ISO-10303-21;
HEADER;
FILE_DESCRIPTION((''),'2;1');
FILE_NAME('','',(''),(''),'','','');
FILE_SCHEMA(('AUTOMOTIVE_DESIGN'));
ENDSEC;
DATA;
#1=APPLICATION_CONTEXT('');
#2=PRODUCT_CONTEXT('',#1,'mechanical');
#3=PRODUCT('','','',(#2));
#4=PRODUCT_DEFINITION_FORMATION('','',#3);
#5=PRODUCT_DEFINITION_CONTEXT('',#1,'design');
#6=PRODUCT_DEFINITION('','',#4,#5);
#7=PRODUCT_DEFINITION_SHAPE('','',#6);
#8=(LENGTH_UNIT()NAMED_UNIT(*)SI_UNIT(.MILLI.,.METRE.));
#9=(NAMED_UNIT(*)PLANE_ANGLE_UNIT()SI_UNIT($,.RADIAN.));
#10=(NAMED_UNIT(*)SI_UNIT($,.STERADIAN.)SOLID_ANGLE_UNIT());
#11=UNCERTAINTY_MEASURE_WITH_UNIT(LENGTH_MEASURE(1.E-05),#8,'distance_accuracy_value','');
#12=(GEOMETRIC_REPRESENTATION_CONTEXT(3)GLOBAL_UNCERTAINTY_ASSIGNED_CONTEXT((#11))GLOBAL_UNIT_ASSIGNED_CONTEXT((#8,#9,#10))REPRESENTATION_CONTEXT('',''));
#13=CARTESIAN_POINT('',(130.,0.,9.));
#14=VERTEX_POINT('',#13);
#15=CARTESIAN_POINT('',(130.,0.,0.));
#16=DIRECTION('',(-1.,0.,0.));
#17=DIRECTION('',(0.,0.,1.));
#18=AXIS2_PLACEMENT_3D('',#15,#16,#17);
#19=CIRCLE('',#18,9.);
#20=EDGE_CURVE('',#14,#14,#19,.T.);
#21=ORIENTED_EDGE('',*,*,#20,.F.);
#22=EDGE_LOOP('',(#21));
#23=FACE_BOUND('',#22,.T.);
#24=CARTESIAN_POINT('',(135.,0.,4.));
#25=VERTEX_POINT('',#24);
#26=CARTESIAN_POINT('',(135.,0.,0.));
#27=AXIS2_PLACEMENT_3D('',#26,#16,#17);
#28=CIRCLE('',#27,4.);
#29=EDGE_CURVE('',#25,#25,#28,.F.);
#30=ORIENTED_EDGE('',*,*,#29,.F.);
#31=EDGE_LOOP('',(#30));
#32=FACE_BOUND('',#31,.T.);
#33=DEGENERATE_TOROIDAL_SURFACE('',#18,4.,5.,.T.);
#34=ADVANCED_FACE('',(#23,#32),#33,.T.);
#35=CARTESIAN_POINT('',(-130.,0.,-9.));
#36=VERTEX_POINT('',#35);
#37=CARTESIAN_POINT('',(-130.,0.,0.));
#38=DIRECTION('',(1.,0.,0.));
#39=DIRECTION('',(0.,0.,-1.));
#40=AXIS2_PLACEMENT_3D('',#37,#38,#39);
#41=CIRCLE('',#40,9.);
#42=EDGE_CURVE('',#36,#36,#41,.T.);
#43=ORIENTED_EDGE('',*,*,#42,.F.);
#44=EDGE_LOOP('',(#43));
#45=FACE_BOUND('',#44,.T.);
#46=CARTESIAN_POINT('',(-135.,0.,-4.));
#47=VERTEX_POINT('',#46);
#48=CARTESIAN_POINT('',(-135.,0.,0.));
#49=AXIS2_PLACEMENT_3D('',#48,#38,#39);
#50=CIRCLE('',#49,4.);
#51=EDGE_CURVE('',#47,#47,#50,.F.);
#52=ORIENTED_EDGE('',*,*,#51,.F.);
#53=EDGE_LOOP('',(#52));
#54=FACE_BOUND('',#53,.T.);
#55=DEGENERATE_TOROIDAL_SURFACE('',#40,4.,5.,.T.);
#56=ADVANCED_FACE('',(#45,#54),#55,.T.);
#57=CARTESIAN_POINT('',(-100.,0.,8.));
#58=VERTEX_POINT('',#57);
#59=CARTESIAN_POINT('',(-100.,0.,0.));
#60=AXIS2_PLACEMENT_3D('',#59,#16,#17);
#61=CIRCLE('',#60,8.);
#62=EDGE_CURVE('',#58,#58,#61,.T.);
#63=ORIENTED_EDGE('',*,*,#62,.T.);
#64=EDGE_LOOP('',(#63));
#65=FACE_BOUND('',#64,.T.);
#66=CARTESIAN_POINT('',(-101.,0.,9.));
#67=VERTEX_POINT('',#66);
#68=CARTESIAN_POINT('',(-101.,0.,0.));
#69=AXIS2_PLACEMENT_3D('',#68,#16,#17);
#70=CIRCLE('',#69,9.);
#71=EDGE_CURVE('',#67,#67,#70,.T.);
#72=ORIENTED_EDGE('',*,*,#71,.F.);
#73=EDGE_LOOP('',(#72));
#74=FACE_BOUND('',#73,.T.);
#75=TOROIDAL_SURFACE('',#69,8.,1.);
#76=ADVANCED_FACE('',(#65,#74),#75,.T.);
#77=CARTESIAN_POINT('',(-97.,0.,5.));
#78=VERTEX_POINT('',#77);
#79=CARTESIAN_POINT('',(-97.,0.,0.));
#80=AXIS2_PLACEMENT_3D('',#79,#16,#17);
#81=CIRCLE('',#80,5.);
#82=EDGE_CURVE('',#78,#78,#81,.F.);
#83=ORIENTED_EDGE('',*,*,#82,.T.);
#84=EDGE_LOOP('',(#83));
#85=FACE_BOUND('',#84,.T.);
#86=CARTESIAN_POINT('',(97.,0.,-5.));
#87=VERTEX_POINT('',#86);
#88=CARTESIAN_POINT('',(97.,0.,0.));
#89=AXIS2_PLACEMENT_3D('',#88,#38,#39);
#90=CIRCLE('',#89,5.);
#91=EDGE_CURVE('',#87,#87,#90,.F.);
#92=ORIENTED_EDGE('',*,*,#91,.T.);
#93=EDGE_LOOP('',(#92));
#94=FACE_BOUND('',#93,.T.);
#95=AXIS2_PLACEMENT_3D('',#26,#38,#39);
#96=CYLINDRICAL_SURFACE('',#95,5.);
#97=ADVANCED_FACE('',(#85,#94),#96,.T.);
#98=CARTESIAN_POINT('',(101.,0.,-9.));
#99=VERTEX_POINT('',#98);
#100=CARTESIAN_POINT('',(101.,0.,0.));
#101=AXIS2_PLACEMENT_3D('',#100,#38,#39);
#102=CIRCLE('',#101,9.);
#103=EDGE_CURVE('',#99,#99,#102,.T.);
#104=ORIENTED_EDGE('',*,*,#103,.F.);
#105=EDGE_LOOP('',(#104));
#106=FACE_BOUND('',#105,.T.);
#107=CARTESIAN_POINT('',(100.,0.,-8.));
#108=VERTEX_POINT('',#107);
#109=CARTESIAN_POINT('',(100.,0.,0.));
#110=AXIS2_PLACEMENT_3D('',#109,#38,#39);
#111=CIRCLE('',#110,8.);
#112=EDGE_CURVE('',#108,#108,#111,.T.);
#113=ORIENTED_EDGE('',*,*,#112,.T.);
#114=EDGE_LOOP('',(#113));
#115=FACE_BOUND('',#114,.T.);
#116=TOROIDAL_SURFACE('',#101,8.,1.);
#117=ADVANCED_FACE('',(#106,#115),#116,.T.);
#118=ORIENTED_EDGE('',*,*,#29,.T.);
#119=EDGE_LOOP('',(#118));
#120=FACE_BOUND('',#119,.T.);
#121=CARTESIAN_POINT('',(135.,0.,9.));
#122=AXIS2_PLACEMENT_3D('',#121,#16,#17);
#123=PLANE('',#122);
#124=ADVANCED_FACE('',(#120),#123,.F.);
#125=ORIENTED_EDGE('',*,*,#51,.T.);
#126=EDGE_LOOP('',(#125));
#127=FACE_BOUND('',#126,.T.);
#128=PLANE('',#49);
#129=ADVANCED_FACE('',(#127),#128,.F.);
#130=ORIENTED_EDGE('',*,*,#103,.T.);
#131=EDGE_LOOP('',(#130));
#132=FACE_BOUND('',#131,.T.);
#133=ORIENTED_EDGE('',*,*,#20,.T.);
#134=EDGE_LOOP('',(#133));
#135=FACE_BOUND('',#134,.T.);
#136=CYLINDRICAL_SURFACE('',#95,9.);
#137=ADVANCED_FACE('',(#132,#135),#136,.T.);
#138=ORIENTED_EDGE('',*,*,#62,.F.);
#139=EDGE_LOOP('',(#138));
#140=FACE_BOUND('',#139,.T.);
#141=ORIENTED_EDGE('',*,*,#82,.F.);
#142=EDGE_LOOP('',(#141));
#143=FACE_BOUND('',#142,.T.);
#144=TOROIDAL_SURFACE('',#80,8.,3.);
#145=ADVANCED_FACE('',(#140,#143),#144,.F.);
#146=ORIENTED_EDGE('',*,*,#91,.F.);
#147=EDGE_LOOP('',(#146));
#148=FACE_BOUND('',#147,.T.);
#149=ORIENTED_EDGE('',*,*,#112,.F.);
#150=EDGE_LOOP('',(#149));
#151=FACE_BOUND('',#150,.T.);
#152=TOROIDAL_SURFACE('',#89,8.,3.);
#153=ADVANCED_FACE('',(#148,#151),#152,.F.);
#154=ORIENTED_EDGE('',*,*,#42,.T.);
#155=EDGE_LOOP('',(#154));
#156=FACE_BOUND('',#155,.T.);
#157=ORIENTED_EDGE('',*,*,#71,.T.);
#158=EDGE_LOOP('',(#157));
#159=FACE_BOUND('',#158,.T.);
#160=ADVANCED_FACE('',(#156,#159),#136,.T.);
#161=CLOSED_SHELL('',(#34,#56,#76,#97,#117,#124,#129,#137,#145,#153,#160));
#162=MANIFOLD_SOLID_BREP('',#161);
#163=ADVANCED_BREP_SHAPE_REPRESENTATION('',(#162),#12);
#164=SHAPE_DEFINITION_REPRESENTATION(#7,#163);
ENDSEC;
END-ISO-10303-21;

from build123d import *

# Parameters (mm, degrees)
FILLET1_R = 3
FILLET2_R = 1
FILLET3_R = 5


with BuildPart() as part:
    # Sketch1 → Revolve1 (revolve)
    with BuildSketch(Plane(origin=(0, 0, 0), x_dir=(1, 0, 0), z_dir=(0, 1, 0)), mode=Mode.PRIVATE) as revolve1_sk:
        Polygon((135, 0), (-135, 0), (-135, -9), (-100, -9), (-100, -5), (100, -5), (100, -9), (135, -9), align=None)
    revolve(revolve1_sk.sketch.rotate(Axis((135, 0, 0), (-1, 0, 0)), 180), axis=Axis((135, 0, 0), (-1, 0, 0)))

    # Fillet1
    fillet1_edges = [part.edges().sort_by_distance(p)[0] for p in [
        (100, 0, 5),
        (-100, 0, 5),
    ]]
    fillet(fillet1_edges, radius=FILLET1_R)

    # Fillet2
    fillet2_edges = [part.edges().sort_by_distance(p)[0] for p in [
        (100, 0, 9),
        (-100, 0, 9),
    ]]
    fillet(fillet2_edges, radius=FILLET2_R - 0.0001)  # a hair under: the kernel refuses the full size

    # Fillet3
    fillet3_edges = [part.edges().sort_by_distance(p)[0] for p in [
        (-135, 0, 9),
        (135, 0, 9),
    ]]
    fillet(fillet3_edges, radius=FILLET3_R)


solid = part.part
